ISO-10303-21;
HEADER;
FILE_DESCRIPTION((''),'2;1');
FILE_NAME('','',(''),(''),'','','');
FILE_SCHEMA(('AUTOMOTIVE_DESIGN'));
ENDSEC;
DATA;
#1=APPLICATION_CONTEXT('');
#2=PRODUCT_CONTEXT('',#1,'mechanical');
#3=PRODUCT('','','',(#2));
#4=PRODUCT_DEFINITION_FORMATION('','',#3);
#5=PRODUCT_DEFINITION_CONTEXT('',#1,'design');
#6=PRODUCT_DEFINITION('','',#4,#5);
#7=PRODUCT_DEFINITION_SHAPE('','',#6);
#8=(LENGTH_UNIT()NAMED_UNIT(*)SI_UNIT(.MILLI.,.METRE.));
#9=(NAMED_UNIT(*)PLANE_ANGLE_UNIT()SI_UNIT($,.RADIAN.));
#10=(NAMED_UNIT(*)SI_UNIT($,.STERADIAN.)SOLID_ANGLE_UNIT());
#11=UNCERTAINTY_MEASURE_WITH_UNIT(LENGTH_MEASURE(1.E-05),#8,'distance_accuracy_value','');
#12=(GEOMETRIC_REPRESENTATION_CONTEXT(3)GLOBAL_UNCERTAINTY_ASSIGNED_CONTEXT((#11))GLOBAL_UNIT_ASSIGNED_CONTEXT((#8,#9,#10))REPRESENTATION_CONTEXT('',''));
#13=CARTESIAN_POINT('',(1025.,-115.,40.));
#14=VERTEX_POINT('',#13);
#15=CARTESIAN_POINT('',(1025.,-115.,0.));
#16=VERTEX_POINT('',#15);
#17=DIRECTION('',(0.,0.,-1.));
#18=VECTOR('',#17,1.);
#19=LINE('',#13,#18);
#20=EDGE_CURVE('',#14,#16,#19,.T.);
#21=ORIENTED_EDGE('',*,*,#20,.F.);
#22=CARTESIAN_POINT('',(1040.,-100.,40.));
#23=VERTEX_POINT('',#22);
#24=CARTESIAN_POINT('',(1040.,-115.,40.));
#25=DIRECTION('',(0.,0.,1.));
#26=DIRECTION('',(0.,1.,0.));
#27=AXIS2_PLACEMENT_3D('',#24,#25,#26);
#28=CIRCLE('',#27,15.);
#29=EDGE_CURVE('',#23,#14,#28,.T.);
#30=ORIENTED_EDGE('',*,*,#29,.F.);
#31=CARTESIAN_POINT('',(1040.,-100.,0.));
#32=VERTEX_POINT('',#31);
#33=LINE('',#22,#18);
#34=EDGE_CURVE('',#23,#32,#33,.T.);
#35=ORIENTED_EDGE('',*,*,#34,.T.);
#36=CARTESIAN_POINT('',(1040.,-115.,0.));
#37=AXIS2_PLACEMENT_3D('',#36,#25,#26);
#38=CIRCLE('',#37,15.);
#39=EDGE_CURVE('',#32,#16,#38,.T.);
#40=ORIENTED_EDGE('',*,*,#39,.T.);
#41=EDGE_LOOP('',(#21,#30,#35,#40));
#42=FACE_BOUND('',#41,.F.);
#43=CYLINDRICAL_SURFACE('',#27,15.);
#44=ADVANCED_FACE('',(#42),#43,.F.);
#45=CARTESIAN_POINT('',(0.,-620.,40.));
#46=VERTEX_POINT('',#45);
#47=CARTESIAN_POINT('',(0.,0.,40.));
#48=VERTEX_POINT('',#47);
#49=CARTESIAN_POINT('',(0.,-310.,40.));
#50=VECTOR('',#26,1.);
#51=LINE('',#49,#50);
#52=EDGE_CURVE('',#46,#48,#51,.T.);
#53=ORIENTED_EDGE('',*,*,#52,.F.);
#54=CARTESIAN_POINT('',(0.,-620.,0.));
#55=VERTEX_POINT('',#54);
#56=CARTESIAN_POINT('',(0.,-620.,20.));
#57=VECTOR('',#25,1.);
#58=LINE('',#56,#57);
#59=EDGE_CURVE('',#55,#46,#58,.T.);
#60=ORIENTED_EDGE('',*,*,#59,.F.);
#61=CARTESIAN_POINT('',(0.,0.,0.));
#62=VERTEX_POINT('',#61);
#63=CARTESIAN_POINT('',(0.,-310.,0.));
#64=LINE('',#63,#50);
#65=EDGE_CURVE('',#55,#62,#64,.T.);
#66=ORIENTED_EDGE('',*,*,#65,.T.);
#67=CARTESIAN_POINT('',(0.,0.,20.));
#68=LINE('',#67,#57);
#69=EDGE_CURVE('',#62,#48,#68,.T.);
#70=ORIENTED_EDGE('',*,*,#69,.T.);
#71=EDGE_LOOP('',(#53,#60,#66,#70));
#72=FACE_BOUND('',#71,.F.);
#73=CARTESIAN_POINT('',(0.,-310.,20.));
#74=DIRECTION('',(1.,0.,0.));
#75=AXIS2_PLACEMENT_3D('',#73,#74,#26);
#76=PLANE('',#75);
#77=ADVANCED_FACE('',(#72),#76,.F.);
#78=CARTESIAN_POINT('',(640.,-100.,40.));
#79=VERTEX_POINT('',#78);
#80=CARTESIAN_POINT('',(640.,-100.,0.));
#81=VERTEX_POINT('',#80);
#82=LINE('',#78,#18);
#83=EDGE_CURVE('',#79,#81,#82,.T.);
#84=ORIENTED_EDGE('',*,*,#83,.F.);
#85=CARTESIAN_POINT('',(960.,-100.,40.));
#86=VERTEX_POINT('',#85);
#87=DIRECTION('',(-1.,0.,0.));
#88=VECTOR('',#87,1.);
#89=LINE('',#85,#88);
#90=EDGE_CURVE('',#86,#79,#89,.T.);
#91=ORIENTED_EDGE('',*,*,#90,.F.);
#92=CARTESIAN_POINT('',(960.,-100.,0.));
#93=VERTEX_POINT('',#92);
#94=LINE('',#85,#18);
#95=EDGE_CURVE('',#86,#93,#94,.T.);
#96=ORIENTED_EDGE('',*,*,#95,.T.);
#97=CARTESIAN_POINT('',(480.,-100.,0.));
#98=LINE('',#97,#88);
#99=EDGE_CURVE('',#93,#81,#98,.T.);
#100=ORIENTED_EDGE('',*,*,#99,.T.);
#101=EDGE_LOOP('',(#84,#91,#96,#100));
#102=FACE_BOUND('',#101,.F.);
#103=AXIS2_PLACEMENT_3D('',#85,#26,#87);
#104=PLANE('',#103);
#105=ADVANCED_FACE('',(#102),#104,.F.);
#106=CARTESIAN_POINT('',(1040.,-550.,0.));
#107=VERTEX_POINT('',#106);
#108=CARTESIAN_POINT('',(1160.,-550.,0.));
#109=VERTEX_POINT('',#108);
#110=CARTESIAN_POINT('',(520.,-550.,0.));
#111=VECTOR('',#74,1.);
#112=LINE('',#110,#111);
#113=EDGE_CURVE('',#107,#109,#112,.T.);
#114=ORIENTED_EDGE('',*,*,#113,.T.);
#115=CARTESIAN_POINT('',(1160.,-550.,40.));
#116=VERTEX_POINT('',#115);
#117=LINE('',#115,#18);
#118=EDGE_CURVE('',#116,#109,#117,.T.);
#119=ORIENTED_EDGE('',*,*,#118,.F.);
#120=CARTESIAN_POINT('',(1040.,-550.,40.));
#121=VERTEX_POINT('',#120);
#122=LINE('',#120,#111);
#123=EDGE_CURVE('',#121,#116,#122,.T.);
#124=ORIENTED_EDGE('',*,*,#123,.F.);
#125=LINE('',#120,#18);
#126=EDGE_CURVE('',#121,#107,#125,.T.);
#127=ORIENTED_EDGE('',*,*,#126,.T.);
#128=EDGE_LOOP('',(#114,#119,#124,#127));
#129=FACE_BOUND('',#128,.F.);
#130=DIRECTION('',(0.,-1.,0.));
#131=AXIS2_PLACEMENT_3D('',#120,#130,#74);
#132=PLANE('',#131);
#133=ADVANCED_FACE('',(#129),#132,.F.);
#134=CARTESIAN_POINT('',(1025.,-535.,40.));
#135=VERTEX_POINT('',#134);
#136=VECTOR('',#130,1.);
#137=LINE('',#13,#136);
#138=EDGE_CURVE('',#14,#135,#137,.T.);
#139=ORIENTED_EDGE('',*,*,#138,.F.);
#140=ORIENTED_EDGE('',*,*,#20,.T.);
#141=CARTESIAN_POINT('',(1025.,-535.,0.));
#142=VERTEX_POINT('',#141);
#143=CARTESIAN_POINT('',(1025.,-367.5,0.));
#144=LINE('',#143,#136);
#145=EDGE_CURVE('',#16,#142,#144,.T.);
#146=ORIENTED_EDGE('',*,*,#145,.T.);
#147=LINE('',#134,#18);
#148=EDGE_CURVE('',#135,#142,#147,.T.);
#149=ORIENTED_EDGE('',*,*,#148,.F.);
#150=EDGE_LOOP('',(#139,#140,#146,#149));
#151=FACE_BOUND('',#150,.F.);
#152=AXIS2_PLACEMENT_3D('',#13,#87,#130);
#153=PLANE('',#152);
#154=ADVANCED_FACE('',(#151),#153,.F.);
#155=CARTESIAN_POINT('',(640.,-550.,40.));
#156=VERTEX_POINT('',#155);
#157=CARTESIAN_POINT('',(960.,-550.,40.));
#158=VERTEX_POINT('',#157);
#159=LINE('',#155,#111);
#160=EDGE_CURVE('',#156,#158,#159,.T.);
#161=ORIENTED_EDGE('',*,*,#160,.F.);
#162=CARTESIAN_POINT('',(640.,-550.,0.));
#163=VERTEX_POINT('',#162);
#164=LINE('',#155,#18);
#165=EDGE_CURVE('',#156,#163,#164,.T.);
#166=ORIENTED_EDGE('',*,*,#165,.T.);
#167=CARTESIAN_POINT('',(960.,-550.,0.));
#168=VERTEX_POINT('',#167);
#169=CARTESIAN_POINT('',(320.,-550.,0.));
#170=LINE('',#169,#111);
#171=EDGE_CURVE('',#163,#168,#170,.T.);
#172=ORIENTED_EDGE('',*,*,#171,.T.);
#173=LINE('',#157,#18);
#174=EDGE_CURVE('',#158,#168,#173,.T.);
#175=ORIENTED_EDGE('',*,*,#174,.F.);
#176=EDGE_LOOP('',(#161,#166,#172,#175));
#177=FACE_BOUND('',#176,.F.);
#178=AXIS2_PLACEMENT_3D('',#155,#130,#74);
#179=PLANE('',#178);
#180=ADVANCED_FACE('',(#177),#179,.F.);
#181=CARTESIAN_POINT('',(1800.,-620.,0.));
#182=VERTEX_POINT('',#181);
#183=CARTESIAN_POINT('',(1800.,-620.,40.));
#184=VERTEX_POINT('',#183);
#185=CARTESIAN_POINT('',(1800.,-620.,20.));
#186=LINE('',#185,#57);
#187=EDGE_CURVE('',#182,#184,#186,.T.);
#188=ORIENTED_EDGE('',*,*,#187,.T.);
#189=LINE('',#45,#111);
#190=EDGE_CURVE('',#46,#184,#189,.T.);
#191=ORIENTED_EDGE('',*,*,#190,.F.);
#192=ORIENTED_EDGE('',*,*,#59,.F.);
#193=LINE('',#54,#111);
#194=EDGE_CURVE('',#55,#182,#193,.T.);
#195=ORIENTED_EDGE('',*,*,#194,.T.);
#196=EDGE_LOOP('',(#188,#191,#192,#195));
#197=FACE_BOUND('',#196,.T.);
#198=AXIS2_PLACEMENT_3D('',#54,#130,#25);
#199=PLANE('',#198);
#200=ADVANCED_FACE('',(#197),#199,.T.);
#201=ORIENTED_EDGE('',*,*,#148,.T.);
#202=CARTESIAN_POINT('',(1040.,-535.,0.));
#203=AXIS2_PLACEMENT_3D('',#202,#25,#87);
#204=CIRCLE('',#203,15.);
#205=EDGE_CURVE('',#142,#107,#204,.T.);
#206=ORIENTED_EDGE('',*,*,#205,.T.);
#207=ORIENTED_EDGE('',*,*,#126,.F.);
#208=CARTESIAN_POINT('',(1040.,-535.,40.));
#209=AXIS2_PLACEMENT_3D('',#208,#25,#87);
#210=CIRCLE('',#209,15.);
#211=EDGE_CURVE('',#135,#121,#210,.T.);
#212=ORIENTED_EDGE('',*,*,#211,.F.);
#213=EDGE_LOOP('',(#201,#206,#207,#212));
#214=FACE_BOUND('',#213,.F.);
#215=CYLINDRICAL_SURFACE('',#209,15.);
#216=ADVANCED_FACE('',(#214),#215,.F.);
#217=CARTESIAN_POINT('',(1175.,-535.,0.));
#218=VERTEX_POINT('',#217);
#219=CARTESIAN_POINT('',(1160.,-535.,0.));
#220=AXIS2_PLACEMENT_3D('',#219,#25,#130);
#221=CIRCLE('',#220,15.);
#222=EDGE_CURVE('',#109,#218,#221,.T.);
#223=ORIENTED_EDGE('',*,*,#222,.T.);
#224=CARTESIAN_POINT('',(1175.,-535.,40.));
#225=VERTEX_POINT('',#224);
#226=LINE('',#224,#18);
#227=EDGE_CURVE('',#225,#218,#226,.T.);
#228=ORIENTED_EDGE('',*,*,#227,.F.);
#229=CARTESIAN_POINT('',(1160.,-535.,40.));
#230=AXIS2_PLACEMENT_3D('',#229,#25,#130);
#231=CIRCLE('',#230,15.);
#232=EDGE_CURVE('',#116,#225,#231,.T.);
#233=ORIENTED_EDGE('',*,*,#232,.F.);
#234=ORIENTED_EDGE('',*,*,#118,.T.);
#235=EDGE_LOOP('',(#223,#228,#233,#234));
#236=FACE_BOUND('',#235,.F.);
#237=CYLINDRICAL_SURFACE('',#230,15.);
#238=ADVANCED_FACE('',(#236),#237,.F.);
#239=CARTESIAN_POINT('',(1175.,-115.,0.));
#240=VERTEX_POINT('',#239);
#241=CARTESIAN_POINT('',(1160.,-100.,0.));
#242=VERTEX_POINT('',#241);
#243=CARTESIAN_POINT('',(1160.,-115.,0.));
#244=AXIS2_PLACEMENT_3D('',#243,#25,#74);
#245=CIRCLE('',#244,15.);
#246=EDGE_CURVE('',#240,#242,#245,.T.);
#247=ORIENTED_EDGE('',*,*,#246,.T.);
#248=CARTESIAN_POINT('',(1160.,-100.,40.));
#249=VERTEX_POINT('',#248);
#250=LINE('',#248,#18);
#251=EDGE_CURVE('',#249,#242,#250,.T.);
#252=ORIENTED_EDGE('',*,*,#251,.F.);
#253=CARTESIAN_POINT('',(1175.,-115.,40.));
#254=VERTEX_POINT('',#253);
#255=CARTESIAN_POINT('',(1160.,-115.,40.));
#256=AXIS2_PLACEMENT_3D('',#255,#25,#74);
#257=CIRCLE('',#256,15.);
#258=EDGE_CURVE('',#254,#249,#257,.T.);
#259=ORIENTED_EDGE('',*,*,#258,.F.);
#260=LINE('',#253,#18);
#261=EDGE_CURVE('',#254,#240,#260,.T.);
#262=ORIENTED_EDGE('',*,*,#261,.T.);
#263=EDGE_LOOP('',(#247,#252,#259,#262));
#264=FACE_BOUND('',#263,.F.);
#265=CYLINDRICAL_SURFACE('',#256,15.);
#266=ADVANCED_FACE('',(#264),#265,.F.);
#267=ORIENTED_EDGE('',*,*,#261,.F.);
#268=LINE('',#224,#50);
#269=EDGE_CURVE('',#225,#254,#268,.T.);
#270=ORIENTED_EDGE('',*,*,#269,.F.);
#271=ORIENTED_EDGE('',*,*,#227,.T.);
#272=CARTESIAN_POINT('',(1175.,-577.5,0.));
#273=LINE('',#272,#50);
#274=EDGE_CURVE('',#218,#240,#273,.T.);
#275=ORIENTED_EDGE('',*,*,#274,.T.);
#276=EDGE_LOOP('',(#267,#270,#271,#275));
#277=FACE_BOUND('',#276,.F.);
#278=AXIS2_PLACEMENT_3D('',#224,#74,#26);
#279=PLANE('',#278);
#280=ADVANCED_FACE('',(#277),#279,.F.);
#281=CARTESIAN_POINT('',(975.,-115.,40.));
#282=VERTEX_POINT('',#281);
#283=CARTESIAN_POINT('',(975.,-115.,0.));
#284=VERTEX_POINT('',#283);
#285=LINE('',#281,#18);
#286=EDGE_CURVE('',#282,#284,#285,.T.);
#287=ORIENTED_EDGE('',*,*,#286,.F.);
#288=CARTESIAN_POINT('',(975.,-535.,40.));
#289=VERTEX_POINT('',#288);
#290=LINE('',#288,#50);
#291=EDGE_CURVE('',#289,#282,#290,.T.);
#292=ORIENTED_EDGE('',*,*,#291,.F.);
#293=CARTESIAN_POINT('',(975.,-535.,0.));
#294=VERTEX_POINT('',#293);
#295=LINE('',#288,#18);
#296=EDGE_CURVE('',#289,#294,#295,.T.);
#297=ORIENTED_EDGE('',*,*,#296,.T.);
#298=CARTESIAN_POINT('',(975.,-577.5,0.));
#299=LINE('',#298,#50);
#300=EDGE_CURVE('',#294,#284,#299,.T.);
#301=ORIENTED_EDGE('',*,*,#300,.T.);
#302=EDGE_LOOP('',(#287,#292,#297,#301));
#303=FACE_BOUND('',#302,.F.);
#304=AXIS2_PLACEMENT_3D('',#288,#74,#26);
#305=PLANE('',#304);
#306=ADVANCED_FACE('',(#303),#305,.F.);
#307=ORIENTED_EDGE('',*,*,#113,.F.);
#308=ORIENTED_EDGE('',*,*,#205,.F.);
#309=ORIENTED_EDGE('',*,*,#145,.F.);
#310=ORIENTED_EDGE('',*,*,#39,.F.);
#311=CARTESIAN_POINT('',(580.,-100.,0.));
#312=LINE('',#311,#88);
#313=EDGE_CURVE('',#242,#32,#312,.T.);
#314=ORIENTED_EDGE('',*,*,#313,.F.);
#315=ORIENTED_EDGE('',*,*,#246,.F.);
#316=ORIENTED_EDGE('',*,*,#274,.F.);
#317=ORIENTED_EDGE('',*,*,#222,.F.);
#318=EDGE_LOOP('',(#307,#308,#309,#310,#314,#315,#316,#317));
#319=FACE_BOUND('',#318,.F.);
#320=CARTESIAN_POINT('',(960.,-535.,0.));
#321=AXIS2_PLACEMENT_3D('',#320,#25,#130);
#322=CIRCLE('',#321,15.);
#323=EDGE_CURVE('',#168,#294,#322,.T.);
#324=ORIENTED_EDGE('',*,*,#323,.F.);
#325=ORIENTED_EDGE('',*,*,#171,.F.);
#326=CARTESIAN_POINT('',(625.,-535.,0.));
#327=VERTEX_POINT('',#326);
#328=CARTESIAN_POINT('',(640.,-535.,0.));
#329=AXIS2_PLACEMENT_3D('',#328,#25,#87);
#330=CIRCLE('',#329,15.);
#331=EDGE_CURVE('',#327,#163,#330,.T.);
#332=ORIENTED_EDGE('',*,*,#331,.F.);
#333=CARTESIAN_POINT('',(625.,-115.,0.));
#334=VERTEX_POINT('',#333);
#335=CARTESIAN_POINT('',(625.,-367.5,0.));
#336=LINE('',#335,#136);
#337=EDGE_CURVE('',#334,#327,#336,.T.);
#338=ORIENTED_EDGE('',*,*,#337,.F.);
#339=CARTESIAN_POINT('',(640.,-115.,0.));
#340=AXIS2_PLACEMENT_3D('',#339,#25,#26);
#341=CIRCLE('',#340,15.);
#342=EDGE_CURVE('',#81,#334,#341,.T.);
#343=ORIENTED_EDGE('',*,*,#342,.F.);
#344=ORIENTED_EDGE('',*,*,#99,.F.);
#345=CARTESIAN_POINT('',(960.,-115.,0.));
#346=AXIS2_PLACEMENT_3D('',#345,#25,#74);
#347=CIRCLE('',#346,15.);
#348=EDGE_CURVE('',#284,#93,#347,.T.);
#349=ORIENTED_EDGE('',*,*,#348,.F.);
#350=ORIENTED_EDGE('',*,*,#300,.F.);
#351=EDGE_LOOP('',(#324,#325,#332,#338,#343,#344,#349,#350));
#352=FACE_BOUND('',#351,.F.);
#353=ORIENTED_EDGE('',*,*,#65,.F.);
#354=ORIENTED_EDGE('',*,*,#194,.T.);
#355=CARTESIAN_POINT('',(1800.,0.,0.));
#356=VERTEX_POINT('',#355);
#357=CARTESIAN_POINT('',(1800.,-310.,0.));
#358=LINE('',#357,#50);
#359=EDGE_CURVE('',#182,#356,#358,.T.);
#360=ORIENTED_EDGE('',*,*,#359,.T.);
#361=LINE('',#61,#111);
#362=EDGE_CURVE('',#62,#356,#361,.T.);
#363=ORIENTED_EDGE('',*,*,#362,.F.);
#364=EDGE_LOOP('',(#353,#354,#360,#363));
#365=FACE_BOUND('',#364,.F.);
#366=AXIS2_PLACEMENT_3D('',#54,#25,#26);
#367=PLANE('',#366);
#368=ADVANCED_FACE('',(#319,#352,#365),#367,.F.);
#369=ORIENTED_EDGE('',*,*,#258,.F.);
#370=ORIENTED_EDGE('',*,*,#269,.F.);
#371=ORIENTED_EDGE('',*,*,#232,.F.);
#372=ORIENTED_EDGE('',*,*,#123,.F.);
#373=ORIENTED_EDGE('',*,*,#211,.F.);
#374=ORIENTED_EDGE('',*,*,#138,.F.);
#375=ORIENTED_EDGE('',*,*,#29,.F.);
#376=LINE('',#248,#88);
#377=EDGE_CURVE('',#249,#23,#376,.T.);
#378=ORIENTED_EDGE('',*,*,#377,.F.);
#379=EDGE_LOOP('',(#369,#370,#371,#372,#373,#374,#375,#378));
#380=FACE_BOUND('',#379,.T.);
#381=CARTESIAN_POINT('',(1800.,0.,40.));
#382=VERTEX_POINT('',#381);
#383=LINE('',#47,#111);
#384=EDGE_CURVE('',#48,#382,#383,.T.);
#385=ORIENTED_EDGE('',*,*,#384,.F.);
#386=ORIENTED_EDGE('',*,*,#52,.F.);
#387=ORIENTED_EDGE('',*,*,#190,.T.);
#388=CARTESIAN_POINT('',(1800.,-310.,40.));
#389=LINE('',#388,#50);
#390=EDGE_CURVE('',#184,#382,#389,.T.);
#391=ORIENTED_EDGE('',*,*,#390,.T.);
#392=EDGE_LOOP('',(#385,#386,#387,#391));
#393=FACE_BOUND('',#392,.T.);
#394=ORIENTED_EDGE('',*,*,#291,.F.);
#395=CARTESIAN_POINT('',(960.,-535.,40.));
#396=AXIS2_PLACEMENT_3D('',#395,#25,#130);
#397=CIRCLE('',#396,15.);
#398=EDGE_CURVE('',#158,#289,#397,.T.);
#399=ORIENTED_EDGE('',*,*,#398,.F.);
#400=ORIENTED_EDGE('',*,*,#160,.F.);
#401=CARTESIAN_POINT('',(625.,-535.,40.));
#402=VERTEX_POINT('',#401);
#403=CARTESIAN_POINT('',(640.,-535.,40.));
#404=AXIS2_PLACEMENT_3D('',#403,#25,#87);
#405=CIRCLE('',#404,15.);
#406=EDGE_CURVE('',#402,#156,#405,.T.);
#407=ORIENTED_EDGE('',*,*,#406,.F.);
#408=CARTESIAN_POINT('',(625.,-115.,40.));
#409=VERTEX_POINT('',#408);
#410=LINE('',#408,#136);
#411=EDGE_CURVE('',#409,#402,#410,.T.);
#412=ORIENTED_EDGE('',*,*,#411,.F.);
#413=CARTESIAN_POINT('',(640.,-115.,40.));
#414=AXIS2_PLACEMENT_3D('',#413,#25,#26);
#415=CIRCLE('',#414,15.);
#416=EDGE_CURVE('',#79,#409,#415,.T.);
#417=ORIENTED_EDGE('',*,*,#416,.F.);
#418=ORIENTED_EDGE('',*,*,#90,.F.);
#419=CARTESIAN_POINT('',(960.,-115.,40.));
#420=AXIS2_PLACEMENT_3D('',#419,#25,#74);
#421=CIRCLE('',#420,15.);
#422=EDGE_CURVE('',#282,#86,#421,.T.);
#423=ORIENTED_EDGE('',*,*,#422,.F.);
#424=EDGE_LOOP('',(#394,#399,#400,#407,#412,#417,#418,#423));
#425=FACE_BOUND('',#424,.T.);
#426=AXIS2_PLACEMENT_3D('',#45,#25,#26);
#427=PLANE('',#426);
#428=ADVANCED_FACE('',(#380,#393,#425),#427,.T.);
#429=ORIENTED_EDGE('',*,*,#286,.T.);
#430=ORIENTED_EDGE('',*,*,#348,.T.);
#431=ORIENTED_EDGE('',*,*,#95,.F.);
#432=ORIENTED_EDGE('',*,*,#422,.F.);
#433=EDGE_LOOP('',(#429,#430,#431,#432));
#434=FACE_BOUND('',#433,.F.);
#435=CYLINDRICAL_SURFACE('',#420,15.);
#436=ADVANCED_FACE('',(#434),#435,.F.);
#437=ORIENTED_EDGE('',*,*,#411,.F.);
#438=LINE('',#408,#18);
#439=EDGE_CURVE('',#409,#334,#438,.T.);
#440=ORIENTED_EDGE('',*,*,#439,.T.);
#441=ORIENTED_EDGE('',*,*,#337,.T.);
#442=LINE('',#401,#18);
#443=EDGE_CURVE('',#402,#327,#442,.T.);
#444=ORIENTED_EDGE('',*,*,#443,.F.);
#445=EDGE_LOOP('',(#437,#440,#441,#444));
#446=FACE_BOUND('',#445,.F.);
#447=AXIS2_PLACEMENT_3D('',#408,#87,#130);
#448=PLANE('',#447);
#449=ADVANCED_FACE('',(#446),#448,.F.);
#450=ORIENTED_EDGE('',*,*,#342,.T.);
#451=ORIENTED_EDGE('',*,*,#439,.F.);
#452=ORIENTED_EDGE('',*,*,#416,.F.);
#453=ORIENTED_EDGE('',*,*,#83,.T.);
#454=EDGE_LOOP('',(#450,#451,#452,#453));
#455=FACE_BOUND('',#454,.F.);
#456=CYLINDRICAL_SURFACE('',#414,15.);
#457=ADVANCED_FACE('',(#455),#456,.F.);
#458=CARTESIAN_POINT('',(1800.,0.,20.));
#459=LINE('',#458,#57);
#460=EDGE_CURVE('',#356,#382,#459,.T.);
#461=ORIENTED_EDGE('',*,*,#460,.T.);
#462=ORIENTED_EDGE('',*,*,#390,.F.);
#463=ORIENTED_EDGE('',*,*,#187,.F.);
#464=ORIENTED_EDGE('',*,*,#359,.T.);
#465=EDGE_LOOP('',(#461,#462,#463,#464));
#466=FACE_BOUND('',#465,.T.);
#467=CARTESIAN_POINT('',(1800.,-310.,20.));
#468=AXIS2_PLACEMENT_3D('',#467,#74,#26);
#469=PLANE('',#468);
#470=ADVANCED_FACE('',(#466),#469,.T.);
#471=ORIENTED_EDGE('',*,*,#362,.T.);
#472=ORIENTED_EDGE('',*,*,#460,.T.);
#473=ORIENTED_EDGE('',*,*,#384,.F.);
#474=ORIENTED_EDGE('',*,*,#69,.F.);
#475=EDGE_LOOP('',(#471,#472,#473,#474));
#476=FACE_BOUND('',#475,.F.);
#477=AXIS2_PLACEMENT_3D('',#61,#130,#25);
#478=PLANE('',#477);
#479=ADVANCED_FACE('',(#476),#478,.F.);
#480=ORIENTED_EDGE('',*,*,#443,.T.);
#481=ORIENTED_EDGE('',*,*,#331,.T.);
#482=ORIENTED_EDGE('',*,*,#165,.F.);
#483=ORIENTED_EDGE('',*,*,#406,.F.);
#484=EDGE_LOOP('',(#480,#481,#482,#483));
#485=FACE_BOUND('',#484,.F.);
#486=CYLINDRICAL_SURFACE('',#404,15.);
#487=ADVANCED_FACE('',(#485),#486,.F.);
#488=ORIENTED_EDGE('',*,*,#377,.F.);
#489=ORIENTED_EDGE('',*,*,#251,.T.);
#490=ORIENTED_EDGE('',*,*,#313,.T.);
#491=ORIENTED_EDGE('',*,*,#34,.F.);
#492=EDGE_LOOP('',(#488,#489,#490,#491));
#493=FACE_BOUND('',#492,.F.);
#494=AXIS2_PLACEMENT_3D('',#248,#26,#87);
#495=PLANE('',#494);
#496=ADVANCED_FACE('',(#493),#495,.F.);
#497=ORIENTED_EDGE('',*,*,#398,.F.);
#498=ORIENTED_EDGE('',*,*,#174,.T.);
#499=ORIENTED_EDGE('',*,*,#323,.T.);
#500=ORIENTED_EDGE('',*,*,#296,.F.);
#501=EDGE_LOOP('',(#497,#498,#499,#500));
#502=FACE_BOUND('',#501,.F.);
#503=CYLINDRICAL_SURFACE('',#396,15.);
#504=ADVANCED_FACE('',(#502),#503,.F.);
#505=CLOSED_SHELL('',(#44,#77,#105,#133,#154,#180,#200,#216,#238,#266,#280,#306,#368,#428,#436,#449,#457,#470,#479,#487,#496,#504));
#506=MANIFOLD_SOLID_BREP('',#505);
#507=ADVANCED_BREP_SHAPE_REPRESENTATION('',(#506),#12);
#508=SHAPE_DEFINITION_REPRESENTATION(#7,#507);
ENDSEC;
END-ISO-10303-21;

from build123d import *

# Parameters (mm, degrees)
F0_W     = 620
F0_H     = 40
F1_DEPTH = 1800
F3_DEPTH = 40.001


# Not quite as in the source:
# - a feature of the source that left no trace in its solid (it failed there, or was rolled back) is left out


with BuildPart() as f1:
    # F0 (on Right) → F1 (new body)
    with BuildSketch(Plane.YZ):
        with Locations((-310, 20)):
            Rectangle(F0_W, F0_H)
    extrude(amount=F1_DEPTH)

    # F2 (on face) → F3 (cut, through all)
    with BuildSketch(Plane.XY.offset(40)):
        with BuildLine():
            Line((960, -100), (640, -100))
            ThreePointArc((640, -100), (629.3933982822, -104.3933982822), (625, -115))
            Line((625, -115), (625, -535))
            ThreePointArc((625, -535), (629.3933982822, -545.6066017178), (640, -550))
            Line((640, -550), (960, -550))
            ThreePointArc((960, -550), (970.6066017178, -545.6066017178), (975, -535))
            Line((975, -535), (975, -115))
            ThreePointArc((975, -115), (970.6066017178, -104.3933982822), (960, -100))
        make_face()
        with BuildLine():
            Line((1160, -100), (1040, -100))
            ThreePointArc((1040, -100), (1029.3933982822, -104.3933982822), (1025, -115))
            Line((1025, -115), (1025, -535))
            ThreePointArc((1025, -535), (1029.3933982822, -545.6066017178), (1040, -550))
            Line((1040, -550), (1160, -550))
            ThreePointArc((1160, -550), (1170.6066017178, -545.6066017178), (1175, -535))
            Line((1175, -535), (1175, -115))
            ThreePointArc((1175, -115), (1170.6066017178, -104.3933982822), (1160, -100))
        make_face()
    extrude(amount=-F3_DEPTH, mode=Mode.SUBTRACT)


solid = f1.part
